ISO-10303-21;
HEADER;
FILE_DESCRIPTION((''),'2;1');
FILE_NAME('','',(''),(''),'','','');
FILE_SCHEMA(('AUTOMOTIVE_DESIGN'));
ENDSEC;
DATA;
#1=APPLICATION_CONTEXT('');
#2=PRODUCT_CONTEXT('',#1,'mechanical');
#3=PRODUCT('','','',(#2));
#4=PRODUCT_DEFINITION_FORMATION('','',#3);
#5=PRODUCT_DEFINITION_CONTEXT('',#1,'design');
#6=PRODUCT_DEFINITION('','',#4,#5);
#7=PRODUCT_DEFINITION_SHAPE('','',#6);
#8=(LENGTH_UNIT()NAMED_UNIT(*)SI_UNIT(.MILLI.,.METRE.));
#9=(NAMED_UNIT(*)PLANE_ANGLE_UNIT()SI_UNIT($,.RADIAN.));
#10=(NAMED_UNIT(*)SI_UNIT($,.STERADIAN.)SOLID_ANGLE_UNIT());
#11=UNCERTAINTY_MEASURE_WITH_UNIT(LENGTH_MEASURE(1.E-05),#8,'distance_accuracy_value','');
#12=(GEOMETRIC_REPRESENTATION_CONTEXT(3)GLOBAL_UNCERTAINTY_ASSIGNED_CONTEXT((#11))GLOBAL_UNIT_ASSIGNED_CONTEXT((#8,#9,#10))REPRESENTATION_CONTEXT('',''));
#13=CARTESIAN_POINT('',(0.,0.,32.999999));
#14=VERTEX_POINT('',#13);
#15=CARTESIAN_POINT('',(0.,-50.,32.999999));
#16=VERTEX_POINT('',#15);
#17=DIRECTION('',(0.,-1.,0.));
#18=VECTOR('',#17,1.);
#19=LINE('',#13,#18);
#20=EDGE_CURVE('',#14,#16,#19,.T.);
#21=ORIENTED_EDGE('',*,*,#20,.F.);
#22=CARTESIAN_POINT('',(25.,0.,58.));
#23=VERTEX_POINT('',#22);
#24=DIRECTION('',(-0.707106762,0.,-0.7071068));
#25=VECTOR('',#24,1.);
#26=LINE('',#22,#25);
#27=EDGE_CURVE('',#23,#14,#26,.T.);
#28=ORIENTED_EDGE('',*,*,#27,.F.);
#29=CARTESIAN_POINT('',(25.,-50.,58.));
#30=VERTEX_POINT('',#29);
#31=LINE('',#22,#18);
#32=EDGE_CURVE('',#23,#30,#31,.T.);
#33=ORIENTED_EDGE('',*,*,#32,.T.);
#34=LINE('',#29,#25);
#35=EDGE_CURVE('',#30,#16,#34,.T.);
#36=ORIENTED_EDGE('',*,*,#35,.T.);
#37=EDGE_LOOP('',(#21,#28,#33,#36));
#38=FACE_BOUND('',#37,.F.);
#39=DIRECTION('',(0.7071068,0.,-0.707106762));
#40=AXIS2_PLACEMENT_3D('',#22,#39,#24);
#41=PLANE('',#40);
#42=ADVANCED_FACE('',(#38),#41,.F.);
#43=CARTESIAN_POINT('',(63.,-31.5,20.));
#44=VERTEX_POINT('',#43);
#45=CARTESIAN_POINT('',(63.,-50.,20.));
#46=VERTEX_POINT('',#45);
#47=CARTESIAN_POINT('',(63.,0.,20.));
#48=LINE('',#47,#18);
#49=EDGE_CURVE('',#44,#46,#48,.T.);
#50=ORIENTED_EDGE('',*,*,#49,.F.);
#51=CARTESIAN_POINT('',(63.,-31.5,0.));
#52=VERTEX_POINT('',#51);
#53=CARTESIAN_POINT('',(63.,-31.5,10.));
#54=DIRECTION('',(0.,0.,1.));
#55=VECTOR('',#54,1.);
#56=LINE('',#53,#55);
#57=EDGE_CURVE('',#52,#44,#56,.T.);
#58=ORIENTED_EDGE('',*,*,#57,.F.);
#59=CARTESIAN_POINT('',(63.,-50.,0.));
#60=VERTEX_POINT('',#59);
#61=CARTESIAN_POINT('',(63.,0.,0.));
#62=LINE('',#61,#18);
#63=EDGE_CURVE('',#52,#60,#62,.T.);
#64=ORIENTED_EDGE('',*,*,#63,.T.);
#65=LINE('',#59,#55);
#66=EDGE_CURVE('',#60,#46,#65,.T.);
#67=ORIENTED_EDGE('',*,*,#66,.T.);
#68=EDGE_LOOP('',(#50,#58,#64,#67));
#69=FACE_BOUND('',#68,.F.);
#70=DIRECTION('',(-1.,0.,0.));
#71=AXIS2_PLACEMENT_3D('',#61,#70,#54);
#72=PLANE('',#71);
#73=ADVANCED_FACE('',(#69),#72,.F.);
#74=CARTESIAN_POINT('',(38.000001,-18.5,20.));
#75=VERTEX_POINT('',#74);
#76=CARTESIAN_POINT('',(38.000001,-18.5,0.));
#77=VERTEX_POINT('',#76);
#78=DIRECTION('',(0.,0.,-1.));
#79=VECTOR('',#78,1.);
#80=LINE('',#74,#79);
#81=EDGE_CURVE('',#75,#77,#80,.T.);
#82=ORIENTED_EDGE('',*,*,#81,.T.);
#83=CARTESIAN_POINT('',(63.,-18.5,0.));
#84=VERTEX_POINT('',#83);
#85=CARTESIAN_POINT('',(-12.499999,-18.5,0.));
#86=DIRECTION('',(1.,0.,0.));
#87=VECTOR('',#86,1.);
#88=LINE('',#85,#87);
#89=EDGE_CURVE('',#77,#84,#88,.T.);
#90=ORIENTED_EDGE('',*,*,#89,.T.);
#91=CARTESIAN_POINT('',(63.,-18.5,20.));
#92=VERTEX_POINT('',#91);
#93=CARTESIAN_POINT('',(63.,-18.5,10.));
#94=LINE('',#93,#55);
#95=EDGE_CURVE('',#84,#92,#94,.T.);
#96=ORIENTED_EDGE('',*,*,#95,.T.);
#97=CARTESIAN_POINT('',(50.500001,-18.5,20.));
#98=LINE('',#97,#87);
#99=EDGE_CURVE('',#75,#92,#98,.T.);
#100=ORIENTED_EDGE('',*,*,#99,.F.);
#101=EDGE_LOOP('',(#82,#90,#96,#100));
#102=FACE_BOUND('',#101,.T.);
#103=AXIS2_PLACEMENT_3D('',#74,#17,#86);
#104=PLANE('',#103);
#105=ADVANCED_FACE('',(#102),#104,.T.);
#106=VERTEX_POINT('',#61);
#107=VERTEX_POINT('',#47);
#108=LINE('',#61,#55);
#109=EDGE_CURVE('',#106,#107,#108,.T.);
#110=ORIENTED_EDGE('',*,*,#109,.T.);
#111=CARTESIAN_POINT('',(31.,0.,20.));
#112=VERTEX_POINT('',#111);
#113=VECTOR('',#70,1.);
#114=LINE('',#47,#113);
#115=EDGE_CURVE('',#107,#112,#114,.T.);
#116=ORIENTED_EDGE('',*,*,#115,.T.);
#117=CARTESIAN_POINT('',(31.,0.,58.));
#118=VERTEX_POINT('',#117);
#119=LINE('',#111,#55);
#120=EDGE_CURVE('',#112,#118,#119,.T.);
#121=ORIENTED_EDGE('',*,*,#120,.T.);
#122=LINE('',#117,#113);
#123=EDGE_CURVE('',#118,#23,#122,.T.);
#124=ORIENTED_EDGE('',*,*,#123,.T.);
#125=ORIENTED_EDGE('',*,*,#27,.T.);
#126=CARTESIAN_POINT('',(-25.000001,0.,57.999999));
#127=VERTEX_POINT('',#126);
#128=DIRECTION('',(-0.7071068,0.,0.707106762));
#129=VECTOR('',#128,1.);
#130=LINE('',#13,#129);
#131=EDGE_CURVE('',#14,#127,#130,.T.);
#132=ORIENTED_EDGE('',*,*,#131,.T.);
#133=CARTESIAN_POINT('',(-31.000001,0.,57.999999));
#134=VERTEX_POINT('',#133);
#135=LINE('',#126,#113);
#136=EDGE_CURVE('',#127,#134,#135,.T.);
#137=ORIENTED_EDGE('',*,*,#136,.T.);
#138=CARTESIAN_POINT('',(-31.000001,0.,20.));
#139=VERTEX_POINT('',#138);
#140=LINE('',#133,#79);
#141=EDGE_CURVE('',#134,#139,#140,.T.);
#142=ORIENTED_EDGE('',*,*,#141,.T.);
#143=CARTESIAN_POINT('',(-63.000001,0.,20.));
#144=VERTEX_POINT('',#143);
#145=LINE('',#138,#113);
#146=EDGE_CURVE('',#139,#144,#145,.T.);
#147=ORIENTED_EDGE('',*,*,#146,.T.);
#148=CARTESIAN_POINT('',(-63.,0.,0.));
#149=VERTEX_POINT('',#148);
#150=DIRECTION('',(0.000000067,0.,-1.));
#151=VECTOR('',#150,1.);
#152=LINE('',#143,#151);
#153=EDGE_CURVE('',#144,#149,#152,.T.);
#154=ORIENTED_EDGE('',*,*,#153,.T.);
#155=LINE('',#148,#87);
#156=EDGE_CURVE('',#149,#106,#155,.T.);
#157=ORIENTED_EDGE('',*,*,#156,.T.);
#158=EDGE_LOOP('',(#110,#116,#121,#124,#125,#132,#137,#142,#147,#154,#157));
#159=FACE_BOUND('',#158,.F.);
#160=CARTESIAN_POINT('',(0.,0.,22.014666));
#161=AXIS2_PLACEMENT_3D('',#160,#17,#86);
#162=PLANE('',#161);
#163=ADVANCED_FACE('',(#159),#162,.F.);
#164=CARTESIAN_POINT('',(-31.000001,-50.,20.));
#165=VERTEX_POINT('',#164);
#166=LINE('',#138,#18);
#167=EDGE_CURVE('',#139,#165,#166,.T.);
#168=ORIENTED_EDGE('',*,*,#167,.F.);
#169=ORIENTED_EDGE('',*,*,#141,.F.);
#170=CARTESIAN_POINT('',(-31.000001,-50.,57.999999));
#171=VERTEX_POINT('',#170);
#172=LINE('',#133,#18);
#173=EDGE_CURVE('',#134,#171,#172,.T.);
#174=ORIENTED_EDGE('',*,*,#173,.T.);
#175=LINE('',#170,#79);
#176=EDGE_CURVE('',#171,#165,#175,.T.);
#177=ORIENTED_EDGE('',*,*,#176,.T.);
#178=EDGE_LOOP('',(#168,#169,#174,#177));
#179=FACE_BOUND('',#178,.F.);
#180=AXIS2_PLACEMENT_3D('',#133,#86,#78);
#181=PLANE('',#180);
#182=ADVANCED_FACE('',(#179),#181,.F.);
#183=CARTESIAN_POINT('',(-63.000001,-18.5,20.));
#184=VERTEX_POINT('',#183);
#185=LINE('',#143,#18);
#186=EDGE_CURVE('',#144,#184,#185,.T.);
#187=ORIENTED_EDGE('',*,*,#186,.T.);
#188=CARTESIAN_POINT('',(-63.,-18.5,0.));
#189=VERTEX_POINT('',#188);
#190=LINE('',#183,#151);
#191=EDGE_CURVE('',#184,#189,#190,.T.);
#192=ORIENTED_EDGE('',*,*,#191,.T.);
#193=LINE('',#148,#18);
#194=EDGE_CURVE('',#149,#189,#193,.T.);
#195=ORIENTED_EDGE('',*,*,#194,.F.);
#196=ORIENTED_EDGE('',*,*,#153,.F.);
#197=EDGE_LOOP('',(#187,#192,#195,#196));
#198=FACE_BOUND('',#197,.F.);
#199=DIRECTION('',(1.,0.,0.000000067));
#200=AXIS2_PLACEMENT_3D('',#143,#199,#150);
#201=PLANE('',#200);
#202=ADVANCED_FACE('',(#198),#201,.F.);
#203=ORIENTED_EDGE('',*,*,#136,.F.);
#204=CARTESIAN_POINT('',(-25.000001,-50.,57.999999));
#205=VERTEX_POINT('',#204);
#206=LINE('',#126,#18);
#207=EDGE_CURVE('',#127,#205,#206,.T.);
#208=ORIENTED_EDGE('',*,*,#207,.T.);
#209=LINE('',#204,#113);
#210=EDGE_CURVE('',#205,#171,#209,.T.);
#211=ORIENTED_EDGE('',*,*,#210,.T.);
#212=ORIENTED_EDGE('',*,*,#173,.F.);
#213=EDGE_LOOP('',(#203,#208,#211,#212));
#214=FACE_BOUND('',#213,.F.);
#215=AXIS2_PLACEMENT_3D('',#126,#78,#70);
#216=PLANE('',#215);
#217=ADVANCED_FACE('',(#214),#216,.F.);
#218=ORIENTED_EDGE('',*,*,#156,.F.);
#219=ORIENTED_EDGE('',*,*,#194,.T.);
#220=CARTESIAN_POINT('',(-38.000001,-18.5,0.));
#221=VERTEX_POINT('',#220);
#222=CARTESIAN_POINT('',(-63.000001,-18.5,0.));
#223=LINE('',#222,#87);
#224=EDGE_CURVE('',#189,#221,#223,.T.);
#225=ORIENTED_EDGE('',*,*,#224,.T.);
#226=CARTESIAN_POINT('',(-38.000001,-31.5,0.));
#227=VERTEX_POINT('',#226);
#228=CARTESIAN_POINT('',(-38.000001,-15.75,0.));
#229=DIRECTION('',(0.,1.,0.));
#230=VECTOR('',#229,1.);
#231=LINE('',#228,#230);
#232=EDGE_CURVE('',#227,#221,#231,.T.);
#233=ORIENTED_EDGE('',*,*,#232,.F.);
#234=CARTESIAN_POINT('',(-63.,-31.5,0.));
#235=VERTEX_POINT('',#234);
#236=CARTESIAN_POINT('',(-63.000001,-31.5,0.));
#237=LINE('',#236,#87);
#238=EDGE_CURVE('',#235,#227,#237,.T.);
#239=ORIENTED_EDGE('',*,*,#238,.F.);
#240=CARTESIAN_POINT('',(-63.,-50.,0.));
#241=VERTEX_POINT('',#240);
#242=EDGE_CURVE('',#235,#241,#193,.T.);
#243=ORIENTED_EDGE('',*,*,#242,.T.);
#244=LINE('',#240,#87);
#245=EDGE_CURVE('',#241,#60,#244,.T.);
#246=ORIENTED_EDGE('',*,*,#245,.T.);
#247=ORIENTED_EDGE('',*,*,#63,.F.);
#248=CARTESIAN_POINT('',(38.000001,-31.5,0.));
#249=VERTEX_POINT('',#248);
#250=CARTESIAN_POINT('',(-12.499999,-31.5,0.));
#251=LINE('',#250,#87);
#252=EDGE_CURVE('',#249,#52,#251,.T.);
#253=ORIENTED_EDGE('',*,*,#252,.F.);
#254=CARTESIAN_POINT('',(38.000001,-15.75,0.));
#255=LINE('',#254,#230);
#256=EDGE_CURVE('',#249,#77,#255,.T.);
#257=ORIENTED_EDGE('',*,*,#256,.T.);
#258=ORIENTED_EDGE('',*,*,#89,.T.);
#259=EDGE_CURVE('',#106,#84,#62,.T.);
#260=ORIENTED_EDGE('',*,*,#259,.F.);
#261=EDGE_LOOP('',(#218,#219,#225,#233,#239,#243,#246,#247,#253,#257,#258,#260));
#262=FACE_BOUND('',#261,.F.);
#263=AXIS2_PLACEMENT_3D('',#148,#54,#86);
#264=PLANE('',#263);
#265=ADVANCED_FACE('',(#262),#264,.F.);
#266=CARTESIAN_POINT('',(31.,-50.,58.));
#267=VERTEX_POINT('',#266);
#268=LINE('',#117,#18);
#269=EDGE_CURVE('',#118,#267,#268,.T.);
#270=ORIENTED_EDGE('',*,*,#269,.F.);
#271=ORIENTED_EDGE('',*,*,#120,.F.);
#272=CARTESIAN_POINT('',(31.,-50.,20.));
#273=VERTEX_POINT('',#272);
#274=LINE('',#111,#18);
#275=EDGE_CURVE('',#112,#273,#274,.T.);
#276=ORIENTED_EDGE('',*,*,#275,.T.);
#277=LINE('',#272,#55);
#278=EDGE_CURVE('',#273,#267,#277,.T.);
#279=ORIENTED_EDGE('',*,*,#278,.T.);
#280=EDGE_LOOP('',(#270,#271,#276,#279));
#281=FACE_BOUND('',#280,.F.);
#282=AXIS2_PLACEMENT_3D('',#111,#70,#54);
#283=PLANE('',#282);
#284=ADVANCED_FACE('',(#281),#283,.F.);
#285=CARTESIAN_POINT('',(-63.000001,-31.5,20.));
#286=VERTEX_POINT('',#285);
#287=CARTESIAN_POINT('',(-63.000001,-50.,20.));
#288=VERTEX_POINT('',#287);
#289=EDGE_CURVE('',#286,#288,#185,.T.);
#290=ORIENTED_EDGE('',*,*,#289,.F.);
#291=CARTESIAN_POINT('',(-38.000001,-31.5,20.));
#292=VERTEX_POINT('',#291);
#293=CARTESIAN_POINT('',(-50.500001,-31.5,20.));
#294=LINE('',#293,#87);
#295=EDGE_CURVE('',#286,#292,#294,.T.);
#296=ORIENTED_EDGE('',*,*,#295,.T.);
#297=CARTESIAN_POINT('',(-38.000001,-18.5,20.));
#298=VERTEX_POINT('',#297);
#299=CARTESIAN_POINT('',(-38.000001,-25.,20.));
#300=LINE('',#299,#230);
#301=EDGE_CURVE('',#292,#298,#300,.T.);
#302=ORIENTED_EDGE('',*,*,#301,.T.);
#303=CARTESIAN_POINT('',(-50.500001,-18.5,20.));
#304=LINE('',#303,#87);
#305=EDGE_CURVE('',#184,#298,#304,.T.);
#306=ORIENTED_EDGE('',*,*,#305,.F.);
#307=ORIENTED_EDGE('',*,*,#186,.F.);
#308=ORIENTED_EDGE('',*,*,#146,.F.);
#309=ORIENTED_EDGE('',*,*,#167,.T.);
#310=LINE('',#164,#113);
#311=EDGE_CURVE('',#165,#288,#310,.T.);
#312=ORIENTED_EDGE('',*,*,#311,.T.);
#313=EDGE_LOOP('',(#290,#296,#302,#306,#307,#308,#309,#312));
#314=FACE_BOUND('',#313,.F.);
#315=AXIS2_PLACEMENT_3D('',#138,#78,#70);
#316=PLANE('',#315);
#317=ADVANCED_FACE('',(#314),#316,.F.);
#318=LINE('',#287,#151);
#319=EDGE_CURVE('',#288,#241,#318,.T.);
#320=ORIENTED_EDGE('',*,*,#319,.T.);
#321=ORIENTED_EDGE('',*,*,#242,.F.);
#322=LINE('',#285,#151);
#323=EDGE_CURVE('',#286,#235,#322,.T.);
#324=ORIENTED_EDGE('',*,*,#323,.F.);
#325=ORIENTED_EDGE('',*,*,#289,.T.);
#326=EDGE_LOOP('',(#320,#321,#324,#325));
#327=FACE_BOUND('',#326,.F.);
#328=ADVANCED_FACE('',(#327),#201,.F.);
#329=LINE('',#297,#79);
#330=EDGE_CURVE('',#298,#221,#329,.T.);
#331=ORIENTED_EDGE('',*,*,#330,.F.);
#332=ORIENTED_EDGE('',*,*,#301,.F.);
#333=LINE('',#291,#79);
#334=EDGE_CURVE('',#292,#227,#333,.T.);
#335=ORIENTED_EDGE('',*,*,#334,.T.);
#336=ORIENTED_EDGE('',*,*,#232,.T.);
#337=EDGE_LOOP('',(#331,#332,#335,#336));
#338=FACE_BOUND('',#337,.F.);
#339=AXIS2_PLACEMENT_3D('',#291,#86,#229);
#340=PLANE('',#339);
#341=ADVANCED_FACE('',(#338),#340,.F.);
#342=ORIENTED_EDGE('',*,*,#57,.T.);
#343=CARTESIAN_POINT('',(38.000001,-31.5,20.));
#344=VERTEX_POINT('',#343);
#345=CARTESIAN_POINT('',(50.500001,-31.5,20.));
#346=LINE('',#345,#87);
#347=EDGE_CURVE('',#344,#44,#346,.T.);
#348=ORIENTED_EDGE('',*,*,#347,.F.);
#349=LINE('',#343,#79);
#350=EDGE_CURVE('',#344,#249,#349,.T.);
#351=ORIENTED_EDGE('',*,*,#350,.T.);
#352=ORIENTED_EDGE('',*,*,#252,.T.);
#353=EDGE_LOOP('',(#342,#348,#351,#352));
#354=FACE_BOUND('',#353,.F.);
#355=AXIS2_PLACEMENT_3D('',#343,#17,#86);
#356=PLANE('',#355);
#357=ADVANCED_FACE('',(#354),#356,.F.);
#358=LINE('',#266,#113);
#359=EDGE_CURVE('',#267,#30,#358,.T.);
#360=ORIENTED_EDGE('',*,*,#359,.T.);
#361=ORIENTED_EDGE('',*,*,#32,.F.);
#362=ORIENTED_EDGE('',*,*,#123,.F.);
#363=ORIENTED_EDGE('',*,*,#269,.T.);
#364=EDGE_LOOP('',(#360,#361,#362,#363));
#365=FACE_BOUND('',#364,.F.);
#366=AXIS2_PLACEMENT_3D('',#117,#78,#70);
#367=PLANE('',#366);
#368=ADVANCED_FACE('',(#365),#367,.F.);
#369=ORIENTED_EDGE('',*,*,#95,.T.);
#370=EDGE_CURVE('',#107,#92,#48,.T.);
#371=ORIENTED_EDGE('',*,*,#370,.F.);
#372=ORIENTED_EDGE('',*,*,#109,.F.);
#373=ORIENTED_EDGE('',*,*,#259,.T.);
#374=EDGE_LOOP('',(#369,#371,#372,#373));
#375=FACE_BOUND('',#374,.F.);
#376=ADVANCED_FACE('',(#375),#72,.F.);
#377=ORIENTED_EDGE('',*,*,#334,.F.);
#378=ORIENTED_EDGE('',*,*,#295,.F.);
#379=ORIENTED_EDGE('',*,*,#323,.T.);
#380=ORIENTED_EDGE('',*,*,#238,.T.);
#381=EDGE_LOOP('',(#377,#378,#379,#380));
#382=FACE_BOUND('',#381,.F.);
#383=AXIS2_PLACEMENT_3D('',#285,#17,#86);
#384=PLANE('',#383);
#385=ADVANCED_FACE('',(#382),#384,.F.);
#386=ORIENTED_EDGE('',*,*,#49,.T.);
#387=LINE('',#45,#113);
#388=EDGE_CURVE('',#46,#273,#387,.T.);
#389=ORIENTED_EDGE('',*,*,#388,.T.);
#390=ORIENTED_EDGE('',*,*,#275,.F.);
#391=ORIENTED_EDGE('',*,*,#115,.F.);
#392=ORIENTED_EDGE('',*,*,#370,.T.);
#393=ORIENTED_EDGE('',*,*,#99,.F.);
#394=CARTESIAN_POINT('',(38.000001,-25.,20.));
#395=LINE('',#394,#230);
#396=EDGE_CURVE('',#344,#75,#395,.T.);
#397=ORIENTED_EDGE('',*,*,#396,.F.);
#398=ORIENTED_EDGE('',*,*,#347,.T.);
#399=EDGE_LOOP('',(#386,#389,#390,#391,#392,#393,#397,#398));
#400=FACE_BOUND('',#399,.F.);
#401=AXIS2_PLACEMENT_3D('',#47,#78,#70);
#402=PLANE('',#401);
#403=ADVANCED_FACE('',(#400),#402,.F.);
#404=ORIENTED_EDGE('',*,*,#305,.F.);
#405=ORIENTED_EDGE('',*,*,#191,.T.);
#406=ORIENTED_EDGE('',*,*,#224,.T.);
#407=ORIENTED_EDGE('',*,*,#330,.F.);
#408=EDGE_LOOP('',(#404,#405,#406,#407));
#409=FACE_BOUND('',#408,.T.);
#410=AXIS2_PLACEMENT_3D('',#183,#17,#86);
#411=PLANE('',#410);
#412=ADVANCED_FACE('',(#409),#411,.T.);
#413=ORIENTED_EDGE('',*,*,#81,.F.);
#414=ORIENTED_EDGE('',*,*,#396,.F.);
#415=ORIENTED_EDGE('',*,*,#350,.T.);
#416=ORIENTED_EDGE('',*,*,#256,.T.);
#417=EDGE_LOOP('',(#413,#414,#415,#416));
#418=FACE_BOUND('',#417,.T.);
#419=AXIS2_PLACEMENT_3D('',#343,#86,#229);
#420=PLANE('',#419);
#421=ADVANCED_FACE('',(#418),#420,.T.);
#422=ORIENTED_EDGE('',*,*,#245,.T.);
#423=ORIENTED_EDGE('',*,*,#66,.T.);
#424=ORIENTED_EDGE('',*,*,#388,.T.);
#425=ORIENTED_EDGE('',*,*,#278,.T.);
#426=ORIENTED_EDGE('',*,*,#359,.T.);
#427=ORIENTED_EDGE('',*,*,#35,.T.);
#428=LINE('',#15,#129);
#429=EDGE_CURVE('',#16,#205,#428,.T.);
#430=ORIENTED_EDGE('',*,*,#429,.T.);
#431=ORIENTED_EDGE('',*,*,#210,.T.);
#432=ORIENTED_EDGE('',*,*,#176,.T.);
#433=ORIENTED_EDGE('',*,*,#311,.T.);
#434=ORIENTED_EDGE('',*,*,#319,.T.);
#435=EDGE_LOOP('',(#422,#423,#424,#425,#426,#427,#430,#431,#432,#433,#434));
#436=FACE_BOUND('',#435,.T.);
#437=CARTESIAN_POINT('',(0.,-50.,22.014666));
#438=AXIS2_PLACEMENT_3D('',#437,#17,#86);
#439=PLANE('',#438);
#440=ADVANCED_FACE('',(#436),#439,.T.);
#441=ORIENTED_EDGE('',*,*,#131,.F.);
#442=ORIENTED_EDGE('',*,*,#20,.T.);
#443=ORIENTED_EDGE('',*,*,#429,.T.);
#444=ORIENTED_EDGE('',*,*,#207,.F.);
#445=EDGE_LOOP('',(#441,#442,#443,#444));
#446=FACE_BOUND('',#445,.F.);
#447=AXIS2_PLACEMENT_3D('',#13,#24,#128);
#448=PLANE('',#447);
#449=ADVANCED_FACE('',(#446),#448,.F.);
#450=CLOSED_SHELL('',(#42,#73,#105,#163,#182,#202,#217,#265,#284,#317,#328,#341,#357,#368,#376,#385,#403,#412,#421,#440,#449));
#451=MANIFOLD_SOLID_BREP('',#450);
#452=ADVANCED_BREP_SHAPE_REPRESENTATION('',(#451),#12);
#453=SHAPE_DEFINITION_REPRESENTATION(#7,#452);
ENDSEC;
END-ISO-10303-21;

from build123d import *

# Parameters (mm, degrees)
F1_DEPTH = 50
F2_W     = 25
F2_H     = 13
F3_DEPTH = 20.001
F4_DEPTH = 20.001


# Not quite as in the source:
# - ends of sketch curves that miss each other by under 0.0002 mm in the source are joined


with BuildPart() as f1:
    # F0 (on Front) → F1 (new body)
    with BuildSketch(Plane.XZ):
        Polygon((-63, 0), (0, 0), (63, 0), (63, 20), (31, 20), (31, 58), (25, 58), (0, 32.9999986697), (-25.0000013303, 57.9999986697), (-31.0000013303, 57.9999986697), (-31.0000013303, 20), (-63.0000013303, 20), align=None)
    extrude(amount=F1_DEPTH)

    # F2 (on face) → F3 (cut, through all)
    with BuildSketch(Plane.XY.offset(20)):
        with Locations((-50.5000013303, -25)):
            Rectangle(F2_W, F2_H)
    extrude(amount=-F3_DEPTH, mode=Mode.SUBTRACT)

    # F2 (on face) → F4 (cut, through all)
    with BuildSketch(Plane.XY.offset(20)):
        with Locations((50.5000013303, -25)):
            Rectangle(F2_W, F2_H)
    extrude(amount=-F4_DEPTH, mode=Mode.SUBTRACT)


solid = f1.part
